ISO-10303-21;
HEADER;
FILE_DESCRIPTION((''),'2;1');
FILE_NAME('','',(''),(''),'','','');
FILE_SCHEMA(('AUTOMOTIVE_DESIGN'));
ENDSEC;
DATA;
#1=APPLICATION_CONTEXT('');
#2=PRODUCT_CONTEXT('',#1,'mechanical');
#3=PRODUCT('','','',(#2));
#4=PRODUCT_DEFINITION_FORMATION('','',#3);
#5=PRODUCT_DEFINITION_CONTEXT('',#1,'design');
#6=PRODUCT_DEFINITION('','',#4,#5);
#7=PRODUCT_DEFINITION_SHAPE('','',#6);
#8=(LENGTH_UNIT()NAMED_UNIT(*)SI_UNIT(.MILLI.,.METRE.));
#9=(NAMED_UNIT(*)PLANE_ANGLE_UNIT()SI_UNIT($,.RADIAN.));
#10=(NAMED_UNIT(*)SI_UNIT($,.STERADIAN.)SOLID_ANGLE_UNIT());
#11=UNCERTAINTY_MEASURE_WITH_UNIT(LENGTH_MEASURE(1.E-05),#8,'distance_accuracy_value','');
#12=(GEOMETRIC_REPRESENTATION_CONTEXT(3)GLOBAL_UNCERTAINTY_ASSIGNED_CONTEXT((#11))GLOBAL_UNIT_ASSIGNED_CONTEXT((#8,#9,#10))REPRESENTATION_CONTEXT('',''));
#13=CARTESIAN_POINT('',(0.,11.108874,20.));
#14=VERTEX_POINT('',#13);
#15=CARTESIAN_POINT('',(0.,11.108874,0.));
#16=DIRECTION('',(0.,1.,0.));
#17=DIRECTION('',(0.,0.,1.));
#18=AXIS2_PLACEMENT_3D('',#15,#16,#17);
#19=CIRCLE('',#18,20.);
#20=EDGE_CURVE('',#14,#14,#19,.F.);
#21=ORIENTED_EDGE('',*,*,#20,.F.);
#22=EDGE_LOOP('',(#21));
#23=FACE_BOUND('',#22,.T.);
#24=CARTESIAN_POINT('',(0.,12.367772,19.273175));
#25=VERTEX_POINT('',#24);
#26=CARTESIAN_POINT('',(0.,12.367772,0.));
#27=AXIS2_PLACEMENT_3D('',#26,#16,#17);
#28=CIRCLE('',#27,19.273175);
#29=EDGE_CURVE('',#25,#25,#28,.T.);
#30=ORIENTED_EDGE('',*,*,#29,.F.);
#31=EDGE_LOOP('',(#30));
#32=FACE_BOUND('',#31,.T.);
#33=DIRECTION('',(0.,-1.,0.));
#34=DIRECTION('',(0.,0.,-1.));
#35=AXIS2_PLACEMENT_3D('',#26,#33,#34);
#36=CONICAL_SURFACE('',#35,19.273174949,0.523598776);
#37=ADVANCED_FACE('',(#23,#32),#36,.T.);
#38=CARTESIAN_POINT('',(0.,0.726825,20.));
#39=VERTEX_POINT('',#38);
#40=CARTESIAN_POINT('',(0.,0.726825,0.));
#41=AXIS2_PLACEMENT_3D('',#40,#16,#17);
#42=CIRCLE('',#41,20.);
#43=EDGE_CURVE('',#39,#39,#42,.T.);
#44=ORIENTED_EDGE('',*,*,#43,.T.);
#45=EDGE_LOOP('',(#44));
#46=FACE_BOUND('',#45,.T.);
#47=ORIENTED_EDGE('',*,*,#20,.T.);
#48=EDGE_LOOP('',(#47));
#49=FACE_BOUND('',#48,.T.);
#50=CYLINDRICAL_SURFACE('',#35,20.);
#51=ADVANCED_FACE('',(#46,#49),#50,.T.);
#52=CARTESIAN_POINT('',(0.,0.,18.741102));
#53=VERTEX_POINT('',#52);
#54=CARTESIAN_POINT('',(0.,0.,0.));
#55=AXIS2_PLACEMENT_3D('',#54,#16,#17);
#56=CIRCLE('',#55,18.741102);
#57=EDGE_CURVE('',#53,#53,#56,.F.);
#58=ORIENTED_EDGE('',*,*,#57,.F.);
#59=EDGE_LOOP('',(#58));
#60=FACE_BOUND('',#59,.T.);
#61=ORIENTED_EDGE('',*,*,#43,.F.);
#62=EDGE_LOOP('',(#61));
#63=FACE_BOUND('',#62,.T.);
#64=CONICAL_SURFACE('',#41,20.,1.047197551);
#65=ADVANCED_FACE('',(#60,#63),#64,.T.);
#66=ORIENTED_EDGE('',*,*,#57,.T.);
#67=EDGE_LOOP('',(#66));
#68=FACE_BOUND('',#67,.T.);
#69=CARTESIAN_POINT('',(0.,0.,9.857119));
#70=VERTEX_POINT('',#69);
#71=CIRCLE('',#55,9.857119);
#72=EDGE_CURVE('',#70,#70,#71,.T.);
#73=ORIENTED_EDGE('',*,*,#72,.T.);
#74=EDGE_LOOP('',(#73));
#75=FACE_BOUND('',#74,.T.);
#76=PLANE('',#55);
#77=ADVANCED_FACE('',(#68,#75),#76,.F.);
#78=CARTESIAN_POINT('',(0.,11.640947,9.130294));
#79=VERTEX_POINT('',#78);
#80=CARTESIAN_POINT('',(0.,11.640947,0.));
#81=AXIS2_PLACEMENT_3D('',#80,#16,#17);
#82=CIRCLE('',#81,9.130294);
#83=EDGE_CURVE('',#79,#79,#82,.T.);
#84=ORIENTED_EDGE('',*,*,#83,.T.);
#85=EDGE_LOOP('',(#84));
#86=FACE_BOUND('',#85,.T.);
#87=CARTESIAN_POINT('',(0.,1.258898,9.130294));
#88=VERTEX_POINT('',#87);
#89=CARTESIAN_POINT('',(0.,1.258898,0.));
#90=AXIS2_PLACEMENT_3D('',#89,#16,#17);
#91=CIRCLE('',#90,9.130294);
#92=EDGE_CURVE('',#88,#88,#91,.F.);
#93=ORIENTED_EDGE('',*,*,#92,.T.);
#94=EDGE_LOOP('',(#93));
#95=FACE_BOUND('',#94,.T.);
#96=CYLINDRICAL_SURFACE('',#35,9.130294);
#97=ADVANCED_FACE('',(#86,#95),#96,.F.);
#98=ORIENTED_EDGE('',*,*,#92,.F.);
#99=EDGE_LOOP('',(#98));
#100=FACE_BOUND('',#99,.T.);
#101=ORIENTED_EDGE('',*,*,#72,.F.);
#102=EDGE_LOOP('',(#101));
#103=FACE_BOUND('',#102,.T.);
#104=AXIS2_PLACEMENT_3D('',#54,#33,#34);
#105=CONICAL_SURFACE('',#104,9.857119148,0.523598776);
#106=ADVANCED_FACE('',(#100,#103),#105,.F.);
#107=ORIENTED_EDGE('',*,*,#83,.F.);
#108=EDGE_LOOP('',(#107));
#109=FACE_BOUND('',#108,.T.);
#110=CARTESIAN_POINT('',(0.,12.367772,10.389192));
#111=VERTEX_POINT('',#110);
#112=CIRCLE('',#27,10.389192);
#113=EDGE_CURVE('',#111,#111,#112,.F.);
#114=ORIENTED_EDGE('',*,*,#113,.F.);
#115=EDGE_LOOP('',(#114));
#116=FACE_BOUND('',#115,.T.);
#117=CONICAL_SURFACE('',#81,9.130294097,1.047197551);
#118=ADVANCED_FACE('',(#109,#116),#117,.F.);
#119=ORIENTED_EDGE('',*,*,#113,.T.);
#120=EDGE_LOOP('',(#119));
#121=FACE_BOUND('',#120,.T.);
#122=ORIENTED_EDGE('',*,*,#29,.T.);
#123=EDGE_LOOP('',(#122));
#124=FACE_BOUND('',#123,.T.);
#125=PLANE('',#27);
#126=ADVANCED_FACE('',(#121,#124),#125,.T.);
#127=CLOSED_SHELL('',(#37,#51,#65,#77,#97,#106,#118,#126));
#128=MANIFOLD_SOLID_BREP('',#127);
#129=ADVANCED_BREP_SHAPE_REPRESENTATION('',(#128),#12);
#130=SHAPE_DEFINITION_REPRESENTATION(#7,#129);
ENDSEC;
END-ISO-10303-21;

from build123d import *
from OCP.BRepFilletAPI import BRepFilletAPI_MakeChamfer

# Parameters (mm, degrees)
SKETCH1_R           = 20
BOSS_EXTRUDE1_DEPTH = 12.367771983
SKETCH2_R           = 9.130294097
CUT_EXTRUDE1_DEPTH  = 31.870079103
CHAMFER1_SIZE       = 1.258897916
CHAMFER1_SIZE2      = 0.726825051


with BuildPart() as part:
    # Sketch1 → Boss-Extrude1 (new body)
    with BuildSketch(Plane(origin=(0, 0, 0), x_dir=(1, 0, 0), z_dir=(0, 1, 0))):
        Circle(SKETCH1_R)
    extrude(amount=BOSS_EXTRUDE1_DEPTH)

    # Sketch2 → Cut-Extrude1 (cut, through all)
    with BuildSketch(Plane(origin=(0, 0, 0), x_dir=(1, 0, 0), z_dir=(0, 1, 0))):
        Circle(SKETCH2_R)
    extrude(amount=CUT_EXTRUDE1_DEPTH, mode=Mode.SUBTRACT)

    # Chamfer1: one chamfer whose edges measure the first distance from different faces: ONE call of the kernel's chamfer builder (chamfer() names one face for all edges)
    chamfer1_edges_1 = [part.edges().sort_by_distance(p)[0] for p in [
        (-9.130294097, 12.367771983, 0),
    ]]
    chamfer1_side_1 = [part.faces().sort_by_distance(p)[0] for p in [
        (-19.434314575, 12.367771983, 0),
    ]]
    chamfer1_edges_2 = [part.edges().sort_by_distance(p)[0] for p in [
        (-9.130294097, 0, 0),
    ]]
    chamfer1_side_2 = [part.faces().sort_by_distance(p)[0] for p in [
        (-9.130294097, 6.183885992, 0),
    ]]
    chamfer1_edges_3 = [part.edges().sort_by_distance(p)[0] for p in [
        (-20, 0, 0),
    ]]
    chamfer1_side_3 = [part.faces().sort_by_distance(p)[0] for p in [
        (-19.434314575, 0, 0),
    ]]
    chamfer1_edges_4 = [part.edges().sort_by_distance(p)[0] for p in [
        (-20, 12.367771983, 0),
    ]]
    chamfer1_side_4 = [part.faces().sort_by_distance(p)[0] for p in [
        (-20, 6.183885992, 0),
    ]]
    chamfer1 = BRepFilletAPI_MakeChamfer(part.part.solid().wrapped)
    for e in chamfer1_edges_1:
        chamfer1.Add(CHAMFER1_SIZE, CHAMFER1_SIZE2, e.wrapped, chamfer1_side_1[0].wrapped)  # the first distance lies on this face
    for e in chamfer1_edges_2:
        chamfer1.Add(CHAMFER1_SIZE, CHAMFER1_SIZE2, e.wrapped, chamfer1_side_2[0].wrapped)  # the first distance lies on this face
    for e in chamfer1_edges_3:
        chamfer1.Add(CHAMFER1_SIZE, CHAMFER1_SIZE2, e.wrapped, chamfer1_side_3[0].wrapped)  # the first distance lies on this face
    for e in chamfer1_edges_4:
        chamfer1.Add(CHAMFER1_SIZE, CHAMFER1_SIZE2, e.wrapped, chamfer1_side_4[0].wrapped)  # the first distance lies on this face
    add(Compound.cast(chamfer1.Shape()), mode=Mode.REPLACE)


solid = part.part
